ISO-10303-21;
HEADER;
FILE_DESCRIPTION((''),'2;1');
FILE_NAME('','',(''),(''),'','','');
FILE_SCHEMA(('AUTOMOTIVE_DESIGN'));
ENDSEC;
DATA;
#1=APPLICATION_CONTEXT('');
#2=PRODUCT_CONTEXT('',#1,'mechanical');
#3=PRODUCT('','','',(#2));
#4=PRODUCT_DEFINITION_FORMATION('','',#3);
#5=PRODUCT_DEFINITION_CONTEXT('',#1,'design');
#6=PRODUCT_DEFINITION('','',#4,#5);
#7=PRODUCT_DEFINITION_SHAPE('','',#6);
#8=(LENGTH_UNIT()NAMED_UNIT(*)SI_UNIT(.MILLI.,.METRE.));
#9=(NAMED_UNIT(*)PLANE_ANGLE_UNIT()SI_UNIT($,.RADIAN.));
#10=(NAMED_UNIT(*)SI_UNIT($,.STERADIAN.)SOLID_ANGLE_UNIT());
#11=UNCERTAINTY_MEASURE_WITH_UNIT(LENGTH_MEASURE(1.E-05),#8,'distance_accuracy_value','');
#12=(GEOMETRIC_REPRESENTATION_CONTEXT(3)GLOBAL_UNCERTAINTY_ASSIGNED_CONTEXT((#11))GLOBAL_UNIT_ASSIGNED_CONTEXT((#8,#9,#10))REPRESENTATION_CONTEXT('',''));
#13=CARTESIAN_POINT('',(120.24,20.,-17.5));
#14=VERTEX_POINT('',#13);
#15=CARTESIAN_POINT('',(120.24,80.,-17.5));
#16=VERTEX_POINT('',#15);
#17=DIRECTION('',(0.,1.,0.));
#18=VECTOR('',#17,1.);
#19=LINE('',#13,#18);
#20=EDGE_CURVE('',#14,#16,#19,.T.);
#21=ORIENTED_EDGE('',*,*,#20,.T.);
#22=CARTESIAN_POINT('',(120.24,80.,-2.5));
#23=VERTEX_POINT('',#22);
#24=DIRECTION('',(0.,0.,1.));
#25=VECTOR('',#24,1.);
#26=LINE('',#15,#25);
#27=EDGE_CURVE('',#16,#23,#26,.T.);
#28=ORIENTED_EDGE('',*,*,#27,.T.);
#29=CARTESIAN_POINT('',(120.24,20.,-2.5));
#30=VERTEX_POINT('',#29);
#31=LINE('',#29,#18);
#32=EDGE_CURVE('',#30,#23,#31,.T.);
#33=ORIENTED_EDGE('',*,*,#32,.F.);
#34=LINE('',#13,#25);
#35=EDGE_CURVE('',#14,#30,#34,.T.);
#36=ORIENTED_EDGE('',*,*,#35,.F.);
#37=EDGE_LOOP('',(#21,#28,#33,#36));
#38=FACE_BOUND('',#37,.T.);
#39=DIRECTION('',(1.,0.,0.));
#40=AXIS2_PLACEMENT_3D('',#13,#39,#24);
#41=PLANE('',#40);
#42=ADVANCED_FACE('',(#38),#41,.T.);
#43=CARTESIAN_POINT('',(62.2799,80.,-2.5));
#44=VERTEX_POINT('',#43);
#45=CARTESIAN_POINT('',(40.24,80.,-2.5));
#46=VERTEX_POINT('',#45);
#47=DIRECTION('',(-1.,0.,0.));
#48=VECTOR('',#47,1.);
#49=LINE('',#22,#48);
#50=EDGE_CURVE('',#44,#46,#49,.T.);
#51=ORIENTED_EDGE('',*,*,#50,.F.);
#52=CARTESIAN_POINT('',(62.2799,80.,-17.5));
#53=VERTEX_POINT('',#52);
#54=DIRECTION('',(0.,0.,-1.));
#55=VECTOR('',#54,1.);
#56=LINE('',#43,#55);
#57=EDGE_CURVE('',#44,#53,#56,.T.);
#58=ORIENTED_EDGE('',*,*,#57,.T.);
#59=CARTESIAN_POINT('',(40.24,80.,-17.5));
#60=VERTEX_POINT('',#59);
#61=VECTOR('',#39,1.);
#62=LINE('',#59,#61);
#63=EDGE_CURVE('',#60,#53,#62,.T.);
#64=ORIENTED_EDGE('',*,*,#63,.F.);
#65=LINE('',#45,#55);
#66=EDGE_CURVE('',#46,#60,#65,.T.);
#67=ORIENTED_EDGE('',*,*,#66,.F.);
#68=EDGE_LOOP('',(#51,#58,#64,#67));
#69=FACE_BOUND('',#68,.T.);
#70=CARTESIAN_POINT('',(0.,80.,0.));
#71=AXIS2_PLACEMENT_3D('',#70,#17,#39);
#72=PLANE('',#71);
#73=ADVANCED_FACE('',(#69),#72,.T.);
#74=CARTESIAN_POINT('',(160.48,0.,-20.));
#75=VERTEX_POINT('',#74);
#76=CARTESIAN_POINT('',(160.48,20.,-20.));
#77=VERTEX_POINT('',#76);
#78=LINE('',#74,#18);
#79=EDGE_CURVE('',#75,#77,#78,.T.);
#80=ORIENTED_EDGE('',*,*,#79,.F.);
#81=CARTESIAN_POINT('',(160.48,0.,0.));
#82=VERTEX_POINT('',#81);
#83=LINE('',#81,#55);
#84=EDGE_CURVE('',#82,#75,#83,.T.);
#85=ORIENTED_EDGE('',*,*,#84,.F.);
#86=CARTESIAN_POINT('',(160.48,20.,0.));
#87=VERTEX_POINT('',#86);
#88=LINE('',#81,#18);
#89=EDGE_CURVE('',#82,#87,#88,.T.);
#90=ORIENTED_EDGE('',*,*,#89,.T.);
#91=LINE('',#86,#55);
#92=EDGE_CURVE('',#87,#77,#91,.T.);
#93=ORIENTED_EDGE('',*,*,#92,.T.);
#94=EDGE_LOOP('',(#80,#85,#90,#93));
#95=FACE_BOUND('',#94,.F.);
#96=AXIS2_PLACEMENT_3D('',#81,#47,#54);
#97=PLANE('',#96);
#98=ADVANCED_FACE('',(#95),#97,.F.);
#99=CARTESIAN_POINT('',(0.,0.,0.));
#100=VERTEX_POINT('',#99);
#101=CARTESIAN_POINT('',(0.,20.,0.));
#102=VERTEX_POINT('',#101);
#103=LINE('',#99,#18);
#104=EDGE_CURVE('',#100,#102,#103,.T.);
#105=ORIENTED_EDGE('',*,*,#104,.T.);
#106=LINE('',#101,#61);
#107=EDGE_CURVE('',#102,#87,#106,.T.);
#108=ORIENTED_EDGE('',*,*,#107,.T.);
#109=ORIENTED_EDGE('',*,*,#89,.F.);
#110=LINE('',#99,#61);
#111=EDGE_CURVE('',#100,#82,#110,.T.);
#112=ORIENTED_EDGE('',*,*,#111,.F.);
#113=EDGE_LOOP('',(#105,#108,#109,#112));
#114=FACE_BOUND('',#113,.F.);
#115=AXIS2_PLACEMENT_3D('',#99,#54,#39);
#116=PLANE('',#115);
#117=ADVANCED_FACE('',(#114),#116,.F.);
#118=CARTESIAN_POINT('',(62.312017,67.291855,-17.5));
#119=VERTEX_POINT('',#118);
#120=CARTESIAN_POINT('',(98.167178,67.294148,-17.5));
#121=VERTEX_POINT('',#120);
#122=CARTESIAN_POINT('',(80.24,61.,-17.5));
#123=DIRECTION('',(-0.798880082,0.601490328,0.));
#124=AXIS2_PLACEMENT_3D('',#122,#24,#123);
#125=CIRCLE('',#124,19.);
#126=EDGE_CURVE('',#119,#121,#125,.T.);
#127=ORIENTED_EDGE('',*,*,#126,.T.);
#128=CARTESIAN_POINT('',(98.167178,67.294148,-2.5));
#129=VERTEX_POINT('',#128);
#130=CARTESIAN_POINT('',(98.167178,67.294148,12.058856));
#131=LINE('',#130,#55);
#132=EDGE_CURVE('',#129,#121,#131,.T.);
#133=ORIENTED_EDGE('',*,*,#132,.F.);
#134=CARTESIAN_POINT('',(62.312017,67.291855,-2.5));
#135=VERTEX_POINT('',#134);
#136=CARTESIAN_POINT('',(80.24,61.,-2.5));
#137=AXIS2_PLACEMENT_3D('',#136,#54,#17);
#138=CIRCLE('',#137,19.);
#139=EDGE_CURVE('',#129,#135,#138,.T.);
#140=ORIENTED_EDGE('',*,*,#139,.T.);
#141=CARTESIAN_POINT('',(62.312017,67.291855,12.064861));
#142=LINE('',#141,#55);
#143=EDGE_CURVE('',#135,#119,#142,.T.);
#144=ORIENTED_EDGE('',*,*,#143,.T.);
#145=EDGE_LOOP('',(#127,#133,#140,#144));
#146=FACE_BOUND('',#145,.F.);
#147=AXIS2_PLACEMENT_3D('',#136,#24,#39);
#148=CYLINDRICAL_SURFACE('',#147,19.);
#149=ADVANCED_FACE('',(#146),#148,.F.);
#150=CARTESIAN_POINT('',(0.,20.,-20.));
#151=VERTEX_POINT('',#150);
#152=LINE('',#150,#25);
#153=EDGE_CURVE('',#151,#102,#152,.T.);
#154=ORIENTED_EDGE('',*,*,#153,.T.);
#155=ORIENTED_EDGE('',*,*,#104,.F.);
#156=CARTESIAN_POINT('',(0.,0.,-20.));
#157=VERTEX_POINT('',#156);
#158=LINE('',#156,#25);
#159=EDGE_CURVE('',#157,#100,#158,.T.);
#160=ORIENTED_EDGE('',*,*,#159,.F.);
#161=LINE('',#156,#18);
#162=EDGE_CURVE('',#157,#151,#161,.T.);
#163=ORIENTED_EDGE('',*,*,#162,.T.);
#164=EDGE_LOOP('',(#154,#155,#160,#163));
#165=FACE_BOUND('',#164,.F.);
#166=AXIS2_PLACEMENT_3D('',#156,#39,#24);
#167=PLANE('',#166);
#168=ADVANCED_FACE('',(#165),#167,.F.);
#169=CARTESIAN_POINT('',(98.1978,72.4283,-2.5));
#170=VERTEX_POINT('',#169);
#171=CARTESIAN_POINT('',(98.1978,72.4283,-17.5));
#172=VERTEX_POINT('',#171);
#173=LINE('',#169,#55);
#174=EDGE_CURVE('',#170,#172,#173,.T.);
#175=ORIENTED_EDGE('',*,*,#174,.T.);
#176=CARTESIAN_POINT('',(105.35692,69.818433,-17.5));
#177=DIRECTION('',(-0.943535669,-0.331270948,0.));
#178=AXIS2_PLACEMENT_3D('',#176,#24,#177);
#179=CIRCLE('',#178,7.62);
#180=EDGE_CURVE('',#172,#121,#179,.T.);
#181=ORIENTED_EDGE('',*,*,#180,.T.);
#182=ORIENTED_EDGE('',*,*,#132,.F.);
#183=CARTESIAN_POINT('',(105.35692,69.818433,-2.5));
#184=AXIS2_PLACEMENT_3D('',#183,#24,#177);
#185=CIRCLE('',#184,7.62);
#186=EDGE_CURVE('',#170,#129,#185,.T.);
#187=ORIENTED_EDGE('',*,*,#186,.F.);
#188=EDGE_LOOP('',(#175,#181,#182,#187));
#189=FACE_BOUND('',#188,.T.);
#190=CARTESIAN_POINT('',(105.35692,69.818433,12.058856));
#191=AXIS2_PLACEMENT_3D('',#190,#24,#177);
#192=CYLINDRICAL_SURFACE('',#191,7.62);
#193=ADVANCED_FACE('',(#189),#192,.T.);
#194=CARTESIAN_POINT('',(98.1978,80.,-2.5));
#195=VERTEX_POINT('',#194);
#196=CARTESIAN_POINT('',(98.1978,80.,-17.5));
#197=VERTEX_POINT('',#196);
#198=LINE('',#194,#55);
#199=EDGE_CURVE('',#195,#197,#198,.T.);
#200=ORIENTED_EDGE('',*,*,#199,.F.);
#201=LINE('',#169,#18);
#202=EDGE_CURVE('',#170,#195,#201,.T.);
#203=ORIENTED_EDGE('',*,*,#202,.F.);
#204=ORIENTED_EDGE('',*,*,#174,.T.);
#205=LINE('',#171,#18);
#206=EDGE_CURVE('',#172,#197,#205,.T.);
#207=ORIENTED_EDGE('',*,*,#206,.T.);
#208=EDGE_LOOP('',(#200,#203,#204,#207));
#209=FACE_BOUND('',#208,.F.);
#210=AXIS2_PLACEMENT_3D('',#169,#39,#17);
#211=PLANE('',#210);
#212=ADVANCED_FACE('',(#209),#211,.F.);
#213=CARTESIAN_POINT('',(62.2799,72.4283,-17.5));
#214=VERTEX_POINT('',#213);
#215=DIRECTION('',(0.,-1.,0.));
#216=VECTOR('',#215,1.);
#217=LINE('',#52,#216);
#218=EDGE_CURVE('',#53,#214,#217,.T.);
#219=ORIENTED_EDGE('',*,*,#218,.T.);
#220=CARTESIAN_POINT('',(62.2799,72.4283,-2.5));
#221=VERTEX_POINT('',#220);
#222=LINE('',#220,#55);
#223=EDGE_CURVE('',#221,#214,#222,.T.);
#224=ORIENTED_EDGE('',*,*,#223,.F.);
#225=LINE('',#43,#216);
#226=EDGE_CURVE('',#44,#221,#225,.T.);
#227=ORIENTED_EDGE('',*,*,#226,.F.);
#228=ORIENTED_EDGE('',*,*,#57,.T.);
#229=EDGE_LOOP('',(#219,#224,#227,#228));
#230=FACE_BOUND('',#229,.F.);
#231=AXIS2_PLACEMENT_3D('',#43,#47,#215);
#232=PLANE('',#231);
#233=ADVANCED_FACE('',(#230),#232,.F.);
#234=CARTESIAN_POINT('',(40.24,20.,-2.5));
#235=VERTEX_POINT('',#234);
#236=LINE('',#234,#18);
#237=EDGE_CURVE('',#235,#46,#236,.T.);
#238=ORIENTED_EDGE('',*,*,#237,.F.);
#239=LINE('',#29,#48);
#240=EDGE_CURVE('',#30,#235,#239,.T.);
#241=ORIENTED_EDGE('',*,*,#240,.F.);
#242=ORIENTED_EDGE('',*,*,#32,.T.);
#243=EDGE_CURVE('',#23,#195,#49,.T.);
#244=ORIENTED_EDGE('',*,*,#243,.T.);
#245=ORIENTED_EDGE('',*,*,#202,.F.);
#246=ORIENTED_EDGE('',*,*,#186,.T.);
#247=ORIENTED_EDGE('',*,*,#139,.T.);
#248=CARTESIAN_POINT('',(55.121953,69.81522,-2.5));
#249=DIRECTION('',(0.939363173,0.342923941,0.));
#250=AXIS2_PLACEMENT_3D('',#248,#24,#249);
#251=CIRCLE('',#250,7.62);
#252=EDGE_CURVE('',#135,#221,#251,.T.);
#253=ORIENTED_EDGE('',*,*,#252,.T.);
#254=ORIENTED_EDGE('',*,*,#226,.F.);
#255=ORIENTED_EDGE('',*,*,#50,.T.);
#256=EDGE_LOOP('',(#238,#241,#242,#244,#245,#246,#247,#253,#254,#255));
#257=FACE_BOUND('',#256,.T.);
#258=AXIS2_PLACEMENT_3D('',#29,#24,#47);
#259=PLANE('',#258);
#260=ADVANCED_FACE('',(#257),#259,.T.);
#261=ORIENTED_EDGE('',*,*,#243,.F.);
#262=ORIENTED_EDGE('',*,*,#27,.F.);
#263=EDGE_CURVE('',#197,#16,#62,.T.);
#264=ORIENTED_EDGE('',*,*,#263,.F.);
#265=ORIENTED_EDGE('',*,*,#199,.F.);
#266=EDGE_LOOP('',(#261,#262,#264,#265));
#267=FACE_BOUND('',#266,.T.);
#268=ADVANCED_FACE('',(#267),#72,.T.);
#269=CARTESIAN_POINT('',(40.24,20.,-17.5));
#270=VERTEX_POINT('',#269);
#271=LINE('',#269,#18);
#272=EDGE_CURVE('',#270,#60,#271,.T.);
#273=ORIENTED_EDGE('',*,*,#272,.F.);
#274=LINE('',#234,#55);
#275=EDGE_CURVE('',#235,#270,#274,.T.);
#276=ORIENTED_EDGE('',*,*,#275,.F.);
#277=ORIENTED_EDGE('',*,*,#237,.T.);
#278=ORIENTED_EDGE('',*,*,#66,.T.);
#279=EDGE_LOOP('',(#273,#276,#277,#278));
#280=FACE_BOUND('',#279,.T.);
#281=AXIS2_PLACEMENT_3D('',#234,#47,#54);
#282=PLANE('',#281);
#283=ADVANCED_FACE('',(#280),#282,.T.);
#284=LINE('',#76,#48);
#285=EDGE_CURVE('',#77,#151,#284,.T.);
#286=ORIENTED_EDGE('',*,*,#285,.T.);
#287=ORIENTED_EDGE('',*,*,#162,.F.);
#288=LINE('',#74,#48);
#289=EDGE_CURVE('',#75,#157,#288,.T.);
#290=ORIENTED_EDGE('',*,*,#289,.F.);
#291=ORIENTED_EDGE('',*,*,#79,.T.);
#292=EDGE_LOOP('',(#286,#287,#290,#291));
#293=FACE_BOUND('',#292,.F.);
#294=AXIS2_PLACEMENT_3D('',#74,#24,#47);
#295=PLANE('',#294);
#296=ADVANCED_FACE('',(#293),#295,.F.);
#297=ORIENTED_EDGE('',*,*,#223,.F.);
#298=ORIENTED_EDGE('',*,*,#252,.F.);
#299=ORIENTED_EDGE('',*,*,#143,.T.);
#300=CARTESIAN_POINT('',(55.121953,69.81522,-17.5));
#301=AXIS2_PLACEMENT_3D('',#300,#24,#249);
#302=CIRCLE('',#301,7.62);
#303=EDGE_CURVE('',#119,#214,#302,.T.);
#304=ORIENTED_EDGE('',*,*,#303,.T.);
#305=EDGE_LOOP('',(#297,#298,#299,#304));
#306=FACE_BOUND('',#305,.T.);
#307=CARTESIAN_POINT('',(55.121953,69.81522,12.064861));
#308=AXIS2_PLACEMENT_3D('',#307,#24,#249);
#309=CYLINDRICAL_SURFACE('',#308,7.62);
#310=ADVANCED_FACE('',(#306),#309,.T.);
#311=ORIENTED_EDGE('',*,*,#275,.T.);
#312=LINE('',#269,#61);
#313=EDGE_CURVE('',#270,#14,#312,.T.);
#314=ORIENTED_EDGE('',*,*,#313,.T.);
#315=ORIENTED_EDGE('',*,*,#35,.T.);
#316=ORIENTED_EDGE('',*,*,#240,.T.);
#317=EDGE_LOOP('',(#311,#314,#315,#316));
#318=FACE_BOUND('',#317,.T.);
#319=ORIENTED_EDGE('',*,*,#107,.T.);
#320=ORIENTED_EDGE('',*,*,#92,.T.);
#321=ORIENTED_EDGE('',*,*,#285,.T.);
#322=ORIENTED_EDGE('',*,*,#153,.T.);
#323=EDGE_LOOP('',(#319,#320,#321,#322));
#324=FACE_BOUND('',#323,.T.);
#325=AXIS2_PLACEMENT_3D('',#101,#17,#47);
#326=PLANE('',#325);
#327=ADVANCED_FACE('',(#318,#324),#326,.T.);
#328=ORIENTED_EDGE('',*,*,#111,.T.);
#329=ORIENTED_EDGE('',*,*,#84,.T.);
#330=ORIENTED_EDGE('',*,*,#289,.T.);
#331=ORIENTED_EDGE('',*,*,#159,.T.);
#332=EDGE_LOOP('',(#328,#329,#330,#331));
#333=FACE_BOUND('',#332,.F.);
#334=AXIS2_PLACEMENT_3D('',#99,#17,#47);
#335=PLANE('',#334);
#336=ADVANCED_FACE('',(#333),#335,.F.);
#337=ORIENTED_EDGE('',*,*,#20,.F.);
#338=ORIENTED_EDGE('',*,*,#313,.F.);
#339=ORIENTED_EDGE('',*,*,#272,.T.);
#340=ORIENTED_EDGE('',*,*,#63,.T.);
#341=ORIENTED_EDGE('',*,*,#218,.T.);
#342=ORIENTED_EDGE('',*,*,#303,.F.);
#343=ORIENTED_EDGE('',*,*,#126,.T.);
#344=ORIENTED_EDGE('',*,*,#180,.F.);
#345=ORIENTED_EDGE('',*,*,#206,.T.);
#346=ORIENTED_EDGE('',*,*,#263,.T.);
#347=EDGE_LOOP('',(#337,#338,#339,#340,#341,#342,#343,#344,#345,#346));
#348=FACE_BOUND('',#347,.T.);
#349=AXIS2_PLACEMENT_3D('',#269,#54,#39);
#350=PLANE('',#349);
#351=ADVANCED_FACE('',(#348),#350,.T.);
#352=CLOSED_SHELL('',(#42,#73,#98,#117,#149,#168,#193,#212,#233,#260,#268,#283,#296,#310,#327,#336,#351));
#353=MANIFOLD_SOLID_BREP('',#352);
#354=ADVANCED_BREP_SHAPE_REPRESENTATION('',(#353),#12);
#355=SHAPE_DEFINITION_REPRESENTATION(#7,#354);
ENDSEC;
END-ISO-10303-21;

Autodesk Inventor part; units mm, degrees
ref_plane "YZ Plane" through (0, 0, 0) normal (1, 0, 0) x (0, 1, 0)
ref_plane "XZ Plane" through (0, 0, 0) normal (0, 1, 0) x (-1, 0, 0)
ref_plane "XY Plane" through (0, 0, 0) normal (0, 0, 1) x (1, 0, 0)
sketch "Sketch1" plane through (0, 0, 0) normal (0, 1, 0) x (-1, 0, 0)
  line L0 (0, 0) -> (-160.48, 0)
  line L1 (-160.48, 0) -> (-160.48, -20)
  line L2 (-160.48, -20) -> (0, -20)
  line L3 (0, -20) -> (0, 0)
  dimension "d0" = 160.48
  dimension "d1" = 20
extrude "Extrusion1" add sketch "Sketch1" along normal blind 20
sketch "Sketch2" plane through (0, 20, 0) normal (0, 1, 0) x (1, 0, 0)
  line L0 (40.24, 17.5) -> (120.24, 17.5)
  line L1 (120.24, 17.5) -> (120.24, 2.5)
  line L2 (120.24, 2.5) -> (40.24, 2.5)
  line L3 (40.24, 2.5) -> (40.24, 17.5)
  line L4 (160.48, 20) -> (0, 20) projected
  line L5 (160.48, 0) -> (160.48, 20) projected
  point P0 (0, 0)
  point P1 (80.24, 17.5)
  point P2 (80.24, 20)
  point P3 (160.48, 10)
  point P4 (120.24, 10)
  dimension "d4" = 80
  dimension "d5" = 15
extrude "Extrusion2" add sketch "Sketch2" along normal blind 60
sketch "Sketch3" plane through (40.24, 20, -2.5) normal (0, 0, 1) x (1, 0, 0)
  circle A0 centre (40, 41) radius 19
  line L0 (0, 60) -> (80, 60) projected
  point P0 (-40.24, -20)
  point P1 (40, 60)
  dimension "d8" = 38
  dimension "d9" = 19
extrude "Extrusion3" cut sketch "Sketch3" against normal blind 15
sketch "Sketch4" plane through (40.24, 20, -2.5) normal (0, 0, 1) x (1, 0, 0)
  line L0 (22.0399, 60) -> (22.0399, 52.4283)
  line L1 (22.0399, 52.4283) -> (24.8213, 52.4283)
  circle A0 centre (40, 41) radius 19 projected
  line L2 (40, 60) -> (22.0399, 60)
  arc A1 (40, 60) -> (24.8213, 52.4283) centre (40, 41) ccw
  point P0 (-40.24, -20)
  dimension "d12" = 7.5717
  dimension "d13" = 17.9601
extrude "Extrusion4" cut sketch "Sketch4" against normal blind 15 contours L2 A0 L1 L0
sketch "Sketch5" plane through (40.24, 20, -2.5) normal (0, 0, 1) x (1, 0, 0)
  arc A0 (24.8213, 52.4283) -> (40, 60) centre (40, 41) ccw projected
  line L0 (55.1787, 52.4283) -> (57.9578, 52.4283)
  line L1 (57.9578, 52.4283) -> (57.9578, 60)
  line L2 (57.9578, 60) -> (40, 60)
  line L3 (80, 60) -> (40, 60) projected
  arc A1 (55.1787, 52.4283) -> (40, 60) centre (40, 41) ccw
  point P0 (-40.24, -20)
  dimension "d16" = 17.9578
  dimension "d17" = 2.7791
  dimension "d18" = 7.5717
extrude "Extrusion5" cut sketch "Sketch5" against normal blind 15
fillet "Fillet1" radius 7.62 1 edges at (95.4187, 72.4283, -10)
fillet "Fillet2" radius 7.62 1 edges at (65.0613, 72.4283, -10)
properties part number "OpticalDeviceLensHolder"
